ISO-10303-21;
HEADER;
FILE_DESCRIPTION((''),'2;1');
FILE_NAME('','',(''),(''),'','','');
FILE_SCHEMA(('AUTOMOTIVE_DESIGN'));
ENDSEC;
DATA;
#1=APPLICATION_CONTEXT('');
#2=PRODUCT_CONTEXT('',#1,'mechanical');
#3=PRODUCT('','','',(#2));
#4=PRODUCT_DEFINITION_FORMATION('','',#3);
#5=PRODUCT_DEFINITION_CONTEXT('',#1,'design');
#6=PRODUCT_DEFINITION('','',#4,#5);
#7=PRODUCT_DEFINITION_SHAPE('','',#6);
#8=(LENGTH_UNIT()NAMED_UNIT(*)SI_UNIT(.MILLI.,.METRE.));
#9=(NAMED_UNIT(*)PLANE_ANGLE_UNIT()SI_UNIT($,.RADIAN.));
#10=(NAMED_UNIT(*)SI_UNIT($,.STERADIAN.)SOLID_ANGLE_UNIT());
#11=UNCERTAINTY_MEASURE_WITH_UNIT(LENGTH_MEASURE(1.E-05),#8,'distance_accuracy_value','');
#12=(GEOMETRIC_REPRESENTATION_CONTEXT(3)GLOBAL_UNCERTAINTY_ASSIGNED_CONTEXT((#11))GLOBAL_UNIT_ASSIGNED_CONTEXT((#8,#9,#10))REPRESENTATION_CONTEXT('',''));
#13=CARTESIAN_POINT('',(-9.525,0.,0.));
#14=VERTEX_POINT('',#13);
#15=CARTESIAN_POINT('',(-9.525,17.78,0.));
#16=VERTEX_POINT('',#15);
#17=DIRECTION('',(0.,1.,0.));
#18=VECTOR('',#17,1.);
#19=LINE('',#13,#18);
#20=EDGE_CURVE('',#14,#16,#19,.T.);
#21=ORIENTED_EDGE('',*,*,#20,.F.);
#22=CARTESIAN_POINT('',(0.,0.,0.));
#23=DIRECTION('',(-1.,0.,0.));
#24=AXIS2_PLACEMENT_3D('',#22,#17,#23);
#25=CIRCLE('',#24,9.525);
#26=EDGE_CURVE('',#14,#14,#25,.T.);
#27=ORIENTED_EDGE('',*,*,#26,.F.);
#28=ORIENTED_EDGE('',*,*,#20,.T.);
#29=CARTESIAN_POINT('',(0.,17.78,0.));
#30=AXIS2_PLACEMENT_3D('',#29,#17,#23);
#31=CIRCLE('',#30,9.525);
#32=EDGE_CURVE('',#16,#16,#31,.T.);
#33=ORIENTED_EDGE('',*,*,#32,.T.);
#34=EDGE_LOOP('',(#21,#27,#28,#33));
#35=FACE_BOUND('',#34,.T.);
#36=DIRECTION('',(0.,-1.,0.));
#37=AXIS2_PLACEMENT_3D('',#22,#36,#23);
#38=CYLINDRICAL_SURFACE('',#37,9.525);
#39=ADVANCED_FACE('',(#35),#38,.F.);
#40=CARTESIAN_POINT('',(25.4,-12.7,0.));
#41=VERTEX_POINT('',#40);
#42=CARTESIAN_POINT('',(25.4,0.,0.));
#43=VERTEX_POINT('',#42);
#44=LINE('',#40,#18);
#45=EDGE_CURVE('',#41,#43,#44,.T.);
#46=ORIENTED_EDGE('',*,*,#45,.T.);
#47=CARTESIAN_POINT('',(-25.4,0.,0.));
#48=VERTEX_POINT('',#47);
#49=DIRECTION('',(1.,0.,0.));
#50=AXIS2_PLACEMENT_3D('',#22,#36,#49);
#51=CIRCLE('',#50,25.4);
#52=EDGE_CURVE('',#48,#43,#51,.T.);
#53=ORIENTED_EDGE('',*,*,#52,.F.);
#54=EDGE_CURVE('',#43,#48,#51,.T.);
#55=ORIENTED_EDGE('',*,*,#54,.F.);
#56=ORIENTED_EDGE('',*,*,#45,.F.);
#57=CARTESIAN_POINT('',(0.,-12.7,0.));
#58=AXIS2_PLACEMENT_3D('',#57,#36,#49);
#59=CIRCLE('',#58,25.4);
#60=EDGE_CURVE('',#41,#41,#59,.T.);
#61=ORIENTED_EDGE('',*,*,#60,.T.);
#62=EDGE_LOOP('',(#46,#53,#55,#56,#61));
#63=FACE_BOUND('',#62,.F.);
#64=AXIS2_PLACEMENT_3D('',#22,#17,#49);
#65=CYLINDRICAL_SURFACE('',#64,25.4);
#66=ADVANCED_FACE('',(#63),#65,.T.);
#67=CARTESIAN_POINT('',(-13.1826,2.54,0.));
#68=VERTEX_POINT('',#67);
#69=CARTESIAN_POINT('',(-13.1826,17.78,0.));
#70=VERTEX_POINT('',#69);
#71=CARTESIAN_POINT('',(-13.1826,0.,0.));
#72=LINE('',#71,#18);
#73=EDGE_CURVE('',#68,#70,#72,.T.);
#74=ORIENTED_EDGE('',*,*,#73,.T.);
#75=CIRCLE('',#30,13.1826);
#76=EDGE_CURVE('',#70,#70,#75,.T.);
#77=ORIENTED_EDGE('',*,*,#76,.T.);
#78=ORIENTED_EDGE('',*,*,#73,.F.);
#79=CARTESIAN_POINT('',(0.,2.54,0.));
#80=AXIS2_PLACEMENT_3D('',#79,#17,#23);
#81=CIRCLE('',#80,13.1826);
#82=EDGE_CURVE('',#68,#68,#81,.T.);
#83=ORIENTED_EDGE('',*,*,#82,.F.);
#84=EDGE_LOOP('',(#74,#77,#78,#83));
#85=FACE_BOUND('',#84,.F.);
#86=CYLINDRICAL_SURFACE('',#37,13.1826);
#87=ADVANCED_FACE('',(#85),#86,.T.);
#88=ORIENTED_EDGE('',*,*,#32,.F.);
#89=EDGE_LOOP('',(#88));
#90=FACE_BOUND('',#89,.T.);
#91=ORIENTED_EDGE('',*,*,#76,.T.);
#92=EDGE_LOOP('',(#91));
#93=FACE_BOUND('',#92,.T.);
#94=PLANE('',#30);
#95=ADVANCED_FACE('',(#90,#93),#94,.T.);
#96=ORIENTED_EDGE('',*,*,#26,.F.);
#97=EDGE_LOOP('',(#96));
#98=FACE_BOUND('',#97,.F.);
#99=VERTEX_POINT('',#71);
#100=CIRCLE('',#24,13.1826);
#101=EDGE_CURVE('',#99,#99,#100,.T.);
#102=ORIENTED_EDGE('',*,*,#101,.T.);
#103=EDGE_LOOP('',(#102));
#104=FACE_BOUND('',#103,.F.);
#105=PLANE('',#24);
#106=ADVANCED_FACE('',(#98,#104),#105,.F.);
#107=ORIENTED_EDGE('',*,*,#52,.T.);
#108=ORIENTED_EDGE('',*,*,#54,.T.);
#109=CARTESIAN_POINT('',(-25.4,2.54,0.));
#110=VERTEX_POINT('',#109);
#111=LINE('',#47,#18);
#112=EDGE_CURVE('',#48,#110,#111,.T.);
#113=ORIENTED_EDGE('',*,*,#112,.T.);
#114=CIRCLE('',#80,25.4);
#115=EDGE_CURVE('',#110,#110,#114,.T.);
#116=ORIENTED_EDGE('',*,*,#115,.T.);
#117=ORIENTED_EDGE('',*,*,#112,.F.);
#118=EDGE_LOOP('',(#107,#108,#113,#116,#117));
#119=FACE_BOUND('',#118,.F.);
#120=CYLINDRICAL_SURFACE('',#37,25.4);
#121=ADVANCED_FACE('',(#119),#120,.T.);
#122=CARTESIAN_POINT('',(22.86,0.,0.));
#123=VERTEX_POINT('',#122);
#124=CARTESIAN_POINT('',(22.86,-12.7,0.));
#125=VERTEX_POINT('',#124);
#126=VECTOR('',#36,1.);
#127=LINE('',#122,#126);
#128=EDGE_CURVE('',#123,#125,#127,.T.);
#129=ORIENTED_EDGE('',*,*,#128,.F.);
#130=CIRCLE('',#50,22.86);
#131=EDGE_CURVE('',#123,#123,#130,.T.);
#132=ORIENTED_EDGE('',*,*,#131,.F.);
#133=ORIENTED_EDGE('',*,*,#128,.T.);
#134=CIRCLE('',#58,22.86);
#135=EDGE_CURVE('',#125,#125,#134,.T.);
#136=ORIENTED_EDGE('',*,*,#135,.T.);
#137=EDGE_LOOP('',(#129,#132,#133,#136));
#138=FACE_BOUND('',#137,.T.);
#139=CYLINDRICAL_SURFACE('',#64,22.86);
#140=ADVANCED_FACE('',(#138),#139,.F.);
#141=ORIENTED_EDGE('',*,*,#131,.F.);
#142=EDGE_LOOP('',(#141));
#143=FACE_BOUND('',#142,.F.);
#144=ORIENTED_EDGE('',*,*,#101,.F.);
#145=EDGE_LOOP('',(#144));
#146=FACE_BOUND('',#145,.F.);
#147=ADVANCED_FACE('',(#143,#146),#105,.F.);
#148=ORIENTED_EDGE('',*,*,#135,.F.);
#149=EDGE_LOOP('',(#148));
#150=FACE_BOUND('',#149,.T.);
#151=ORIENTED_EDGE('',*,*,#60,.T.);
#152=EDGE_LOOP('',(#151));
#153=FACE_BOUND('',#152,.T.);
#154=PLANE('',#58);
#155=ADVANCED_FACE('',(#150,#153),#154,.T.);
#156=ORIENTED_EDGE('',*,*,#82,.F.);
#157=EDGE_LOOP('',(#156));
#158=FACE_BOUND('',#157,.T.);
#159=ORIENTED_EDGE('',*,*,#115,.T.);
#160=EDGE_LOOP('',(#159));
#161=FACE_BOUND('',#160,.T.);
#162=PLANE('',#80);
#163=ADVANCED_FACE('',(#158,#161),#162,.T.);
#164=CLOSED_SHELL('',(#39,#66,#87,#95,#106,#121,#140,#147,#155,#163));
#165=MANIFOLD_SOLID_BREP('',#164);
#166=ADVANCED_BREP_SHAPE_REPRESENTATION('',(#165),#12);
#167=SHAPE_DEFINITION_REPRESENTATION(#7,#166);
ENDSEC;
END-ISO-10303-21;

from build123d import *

# Parameters (mm, degrees)
F0_R     = 25.4
F0_R_2   = 22.86
F1_DEPTH = 3.81
F2_DEPTH = 12.7
F3_R     = 25.4
F3_R_2   = 22.86
F3_R_3   = 13.1826
F4_DEPTH = 2.54
F3_R_4   = 9.525
F5_DEPTH = 17.78


with BuildPart() as f1:
    # F0 (on Front) → F1 (new body)
    with BuildSketch(Plane.XZ):
        Circle(F0_R)
        Circle(F0_R_2, mode=Mode.SUBTRACT)
    extrude(amount=F1_DEPTH)

    # F0 (on Front) → F2 (join)
    with BuildSketch(Plane.XZ):
        Circle(F0_R)
        Circle(F0_R_2, mode=Mode.SUBTRACT)
    extrude(amount=F2_DEPTH)

    # F3 (on face) → F4 (join)
    with BuildSketch(Plane(origin=(0, 0, 0), x_dir=(-1, 0, 0), z_dir=(0, 1, 0))):
        Circle(F3_R)
        Circle(F3_R_2, mode=Mode.SUBTRACT)
        Circle(F3_R_2)
        Circle(F3_R_3, mode=Mode.SUBTRACT)
    extrude(amount=F4_DEPTH)

    # F3 (on face) → F5 (join)
    with BuildSketch(Plane(origin=(0, 0, 0), x_dir=(-1, 0, 0), z_dir=(0, 1, 0))):
        Circle(F3_R_3)
        Circle(F3_R_4, mode=Mode.SUBTRACT)
    extrude(amount=F5_DEPTH)


solid = f1.part
